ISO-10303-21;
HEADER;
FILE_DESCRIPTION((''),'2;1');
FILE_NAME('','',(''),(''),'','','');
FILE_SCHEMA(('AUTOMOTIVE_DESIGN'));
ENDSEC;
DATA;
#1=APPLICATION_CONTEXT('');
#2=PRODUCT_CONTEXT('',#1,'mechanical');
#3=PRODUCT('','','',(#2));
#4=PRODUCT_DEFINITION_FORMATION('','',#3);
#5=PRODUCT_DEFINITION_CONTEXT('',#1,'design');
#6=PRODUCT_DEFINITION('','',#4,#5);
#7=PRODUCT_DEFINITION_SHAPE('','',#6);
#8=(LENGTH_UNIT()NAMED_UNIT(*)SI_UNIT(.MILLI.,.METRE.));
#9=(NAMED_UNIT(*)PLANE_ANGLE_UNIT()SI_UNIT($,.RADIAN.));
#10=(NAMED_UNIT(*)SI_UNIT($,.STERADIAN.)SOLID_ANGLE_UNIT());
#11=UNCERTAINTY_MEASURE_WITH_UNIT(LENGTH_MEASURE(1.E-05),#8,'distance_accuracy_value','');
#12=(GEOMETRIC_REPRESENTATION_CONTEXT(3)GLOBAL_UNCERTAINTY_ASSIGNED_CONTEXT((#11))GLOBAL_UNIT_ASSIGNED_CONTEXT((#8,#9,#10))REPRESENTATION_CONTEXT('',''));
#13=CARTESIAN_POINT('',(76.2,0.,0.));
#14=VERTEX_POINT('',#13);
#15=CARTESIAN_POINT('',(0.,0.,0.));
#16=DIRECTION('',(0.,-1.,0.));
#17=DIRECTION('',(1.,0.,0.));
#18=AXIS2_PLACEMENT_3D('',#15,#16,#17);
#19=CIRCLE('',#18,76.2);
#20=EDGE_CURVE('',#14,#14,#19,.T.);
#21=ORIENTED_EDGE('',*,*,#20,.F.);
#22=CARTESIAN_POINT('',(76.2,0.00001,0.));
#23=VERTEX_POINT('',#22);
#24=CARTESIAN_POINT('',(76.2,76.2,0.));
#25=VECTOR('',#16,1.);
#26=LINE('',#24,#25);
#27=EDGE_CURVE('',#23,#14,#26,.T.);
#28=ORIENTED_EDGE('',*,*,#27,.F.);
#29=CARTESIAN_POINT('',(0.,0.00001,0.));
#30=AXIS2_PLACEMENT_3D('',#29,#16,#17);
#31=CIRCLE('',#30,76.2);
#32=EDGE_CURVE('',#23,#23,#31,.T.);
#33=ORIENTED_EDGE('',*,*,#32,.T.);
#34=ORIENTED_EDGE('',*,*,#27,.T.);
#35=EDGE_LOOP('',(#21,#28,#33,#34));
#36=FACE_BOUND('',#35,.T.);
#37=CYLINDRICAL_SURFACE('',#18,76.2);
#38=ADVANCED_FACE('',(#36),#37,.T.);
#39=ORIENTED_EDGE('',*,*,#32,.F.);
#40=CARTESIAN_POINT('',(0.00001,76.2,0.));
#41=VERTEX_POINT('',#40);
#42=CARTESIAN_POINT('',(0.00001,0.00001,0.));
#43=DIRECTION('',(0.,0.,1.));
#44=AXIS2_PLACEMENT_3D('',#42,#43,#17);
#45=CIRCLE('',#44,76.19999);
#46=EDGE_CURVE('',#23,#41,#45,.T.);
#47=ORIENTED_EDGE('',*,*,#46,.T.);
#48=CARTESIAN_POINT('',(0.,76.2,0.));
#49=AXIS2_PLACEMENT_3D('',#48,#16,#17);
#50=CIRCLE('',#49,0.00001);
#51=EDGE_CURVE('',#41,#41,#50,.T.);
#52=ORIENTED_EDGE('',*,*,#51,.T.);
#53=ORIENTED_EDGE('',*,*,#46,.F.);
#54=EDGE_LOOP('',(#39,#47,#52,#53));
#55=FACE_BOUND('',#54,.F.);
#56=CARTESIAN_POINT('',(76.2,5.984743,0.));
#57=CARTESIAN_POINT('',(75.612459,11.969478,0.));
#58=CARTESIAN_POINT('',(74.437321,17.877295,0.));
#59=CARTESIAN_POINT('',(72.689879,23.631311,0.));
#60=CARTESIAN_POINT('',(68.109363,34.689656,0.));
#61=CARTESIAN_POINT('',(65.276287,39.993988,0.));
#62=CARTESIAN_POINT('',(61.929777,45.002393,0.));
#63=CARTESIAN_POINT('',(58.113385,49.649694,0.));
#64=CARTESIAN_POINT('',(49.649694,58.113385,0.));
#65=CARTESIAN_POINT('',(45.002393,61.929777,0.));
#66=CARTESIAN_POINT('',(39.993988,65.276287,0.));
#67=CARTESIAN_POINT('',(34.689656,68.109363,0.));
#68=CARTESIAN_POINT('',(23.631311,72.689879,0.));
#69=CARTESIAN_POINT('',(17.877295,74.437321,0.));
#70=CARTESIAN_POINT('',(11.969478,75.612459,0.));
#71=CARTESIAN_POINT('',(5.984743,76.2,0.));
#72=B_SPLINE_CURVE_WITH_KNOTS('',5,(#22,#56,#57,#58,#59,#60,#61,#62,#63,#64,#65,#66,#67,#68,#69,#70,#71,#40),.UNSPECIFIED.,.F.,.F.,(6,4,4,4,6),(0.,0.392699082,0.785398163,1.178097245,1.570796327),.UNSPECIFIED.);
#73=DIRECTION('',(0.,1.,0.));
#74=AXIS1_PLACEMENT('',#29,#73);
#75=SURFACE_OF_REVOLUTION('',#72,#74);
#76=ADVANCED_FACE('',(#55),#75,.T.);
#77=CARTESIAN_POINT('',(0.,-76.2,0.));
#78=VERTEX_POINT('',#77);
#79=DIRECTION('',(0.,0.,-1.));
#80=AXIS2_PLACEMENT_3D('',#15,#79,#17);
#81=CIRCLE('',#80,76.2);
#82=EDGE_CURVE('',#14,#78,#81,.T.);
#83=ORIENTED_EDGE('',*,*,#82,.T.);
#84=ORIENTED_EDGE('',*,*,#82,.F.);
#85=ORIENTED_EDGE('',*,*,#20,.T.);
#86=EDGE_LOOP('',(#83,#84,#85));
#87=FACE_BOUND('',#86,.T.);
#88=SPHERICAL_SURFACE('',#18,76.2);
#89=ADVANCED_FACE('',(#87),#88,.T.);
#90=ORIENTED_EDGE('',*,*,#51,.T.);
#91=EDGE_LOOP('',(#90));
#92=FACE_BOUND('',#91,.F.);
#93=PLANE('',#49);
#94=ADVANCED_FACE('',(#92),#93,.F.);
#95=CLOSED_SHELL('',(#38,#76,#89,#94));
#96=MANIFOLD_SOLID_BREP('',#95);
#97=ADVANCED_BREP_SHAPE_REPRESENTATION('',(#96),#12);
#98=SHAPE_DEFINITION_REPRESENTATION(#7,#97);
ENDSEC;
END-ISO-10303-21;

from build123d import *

# Parameters (mm, degrees)
F0_R     = 76.2
F1_DEPTH = 76.2
F2_R     = 76.2
F3_R     = 76.19999


# Not quite as in the source:
# - a fillet or chamfer is up to 0.001 mm smaller than in the source, because OpenCascade refuses the exact size


with BuildPart() as f1:
    # F0 (on Front) → F1 (new body, symmetric)
    with BuildSketch(Plane.XZ):
        Circle(F0_R)
    extrude(amount=F1_DEPTH, both=True)

    # F2
    f2_edges = [f1.edges().sort_by_distance(p)[0] for p in [
        (-76.2, -76.2, 0),
    ]]
    fillet(f2_edges, radius=F2_R)

    # F3 (radius 76.2 in the source; OpenCascade refuses exactly that, so slightly less here)
    f3_edges = [f1.edges().sort_by_distance(p)[0] for p in [
        (-76.2, 76.2, 0),
    ]]
    fillet(f3_edges, radius=F3_R)


solid = f1.part
